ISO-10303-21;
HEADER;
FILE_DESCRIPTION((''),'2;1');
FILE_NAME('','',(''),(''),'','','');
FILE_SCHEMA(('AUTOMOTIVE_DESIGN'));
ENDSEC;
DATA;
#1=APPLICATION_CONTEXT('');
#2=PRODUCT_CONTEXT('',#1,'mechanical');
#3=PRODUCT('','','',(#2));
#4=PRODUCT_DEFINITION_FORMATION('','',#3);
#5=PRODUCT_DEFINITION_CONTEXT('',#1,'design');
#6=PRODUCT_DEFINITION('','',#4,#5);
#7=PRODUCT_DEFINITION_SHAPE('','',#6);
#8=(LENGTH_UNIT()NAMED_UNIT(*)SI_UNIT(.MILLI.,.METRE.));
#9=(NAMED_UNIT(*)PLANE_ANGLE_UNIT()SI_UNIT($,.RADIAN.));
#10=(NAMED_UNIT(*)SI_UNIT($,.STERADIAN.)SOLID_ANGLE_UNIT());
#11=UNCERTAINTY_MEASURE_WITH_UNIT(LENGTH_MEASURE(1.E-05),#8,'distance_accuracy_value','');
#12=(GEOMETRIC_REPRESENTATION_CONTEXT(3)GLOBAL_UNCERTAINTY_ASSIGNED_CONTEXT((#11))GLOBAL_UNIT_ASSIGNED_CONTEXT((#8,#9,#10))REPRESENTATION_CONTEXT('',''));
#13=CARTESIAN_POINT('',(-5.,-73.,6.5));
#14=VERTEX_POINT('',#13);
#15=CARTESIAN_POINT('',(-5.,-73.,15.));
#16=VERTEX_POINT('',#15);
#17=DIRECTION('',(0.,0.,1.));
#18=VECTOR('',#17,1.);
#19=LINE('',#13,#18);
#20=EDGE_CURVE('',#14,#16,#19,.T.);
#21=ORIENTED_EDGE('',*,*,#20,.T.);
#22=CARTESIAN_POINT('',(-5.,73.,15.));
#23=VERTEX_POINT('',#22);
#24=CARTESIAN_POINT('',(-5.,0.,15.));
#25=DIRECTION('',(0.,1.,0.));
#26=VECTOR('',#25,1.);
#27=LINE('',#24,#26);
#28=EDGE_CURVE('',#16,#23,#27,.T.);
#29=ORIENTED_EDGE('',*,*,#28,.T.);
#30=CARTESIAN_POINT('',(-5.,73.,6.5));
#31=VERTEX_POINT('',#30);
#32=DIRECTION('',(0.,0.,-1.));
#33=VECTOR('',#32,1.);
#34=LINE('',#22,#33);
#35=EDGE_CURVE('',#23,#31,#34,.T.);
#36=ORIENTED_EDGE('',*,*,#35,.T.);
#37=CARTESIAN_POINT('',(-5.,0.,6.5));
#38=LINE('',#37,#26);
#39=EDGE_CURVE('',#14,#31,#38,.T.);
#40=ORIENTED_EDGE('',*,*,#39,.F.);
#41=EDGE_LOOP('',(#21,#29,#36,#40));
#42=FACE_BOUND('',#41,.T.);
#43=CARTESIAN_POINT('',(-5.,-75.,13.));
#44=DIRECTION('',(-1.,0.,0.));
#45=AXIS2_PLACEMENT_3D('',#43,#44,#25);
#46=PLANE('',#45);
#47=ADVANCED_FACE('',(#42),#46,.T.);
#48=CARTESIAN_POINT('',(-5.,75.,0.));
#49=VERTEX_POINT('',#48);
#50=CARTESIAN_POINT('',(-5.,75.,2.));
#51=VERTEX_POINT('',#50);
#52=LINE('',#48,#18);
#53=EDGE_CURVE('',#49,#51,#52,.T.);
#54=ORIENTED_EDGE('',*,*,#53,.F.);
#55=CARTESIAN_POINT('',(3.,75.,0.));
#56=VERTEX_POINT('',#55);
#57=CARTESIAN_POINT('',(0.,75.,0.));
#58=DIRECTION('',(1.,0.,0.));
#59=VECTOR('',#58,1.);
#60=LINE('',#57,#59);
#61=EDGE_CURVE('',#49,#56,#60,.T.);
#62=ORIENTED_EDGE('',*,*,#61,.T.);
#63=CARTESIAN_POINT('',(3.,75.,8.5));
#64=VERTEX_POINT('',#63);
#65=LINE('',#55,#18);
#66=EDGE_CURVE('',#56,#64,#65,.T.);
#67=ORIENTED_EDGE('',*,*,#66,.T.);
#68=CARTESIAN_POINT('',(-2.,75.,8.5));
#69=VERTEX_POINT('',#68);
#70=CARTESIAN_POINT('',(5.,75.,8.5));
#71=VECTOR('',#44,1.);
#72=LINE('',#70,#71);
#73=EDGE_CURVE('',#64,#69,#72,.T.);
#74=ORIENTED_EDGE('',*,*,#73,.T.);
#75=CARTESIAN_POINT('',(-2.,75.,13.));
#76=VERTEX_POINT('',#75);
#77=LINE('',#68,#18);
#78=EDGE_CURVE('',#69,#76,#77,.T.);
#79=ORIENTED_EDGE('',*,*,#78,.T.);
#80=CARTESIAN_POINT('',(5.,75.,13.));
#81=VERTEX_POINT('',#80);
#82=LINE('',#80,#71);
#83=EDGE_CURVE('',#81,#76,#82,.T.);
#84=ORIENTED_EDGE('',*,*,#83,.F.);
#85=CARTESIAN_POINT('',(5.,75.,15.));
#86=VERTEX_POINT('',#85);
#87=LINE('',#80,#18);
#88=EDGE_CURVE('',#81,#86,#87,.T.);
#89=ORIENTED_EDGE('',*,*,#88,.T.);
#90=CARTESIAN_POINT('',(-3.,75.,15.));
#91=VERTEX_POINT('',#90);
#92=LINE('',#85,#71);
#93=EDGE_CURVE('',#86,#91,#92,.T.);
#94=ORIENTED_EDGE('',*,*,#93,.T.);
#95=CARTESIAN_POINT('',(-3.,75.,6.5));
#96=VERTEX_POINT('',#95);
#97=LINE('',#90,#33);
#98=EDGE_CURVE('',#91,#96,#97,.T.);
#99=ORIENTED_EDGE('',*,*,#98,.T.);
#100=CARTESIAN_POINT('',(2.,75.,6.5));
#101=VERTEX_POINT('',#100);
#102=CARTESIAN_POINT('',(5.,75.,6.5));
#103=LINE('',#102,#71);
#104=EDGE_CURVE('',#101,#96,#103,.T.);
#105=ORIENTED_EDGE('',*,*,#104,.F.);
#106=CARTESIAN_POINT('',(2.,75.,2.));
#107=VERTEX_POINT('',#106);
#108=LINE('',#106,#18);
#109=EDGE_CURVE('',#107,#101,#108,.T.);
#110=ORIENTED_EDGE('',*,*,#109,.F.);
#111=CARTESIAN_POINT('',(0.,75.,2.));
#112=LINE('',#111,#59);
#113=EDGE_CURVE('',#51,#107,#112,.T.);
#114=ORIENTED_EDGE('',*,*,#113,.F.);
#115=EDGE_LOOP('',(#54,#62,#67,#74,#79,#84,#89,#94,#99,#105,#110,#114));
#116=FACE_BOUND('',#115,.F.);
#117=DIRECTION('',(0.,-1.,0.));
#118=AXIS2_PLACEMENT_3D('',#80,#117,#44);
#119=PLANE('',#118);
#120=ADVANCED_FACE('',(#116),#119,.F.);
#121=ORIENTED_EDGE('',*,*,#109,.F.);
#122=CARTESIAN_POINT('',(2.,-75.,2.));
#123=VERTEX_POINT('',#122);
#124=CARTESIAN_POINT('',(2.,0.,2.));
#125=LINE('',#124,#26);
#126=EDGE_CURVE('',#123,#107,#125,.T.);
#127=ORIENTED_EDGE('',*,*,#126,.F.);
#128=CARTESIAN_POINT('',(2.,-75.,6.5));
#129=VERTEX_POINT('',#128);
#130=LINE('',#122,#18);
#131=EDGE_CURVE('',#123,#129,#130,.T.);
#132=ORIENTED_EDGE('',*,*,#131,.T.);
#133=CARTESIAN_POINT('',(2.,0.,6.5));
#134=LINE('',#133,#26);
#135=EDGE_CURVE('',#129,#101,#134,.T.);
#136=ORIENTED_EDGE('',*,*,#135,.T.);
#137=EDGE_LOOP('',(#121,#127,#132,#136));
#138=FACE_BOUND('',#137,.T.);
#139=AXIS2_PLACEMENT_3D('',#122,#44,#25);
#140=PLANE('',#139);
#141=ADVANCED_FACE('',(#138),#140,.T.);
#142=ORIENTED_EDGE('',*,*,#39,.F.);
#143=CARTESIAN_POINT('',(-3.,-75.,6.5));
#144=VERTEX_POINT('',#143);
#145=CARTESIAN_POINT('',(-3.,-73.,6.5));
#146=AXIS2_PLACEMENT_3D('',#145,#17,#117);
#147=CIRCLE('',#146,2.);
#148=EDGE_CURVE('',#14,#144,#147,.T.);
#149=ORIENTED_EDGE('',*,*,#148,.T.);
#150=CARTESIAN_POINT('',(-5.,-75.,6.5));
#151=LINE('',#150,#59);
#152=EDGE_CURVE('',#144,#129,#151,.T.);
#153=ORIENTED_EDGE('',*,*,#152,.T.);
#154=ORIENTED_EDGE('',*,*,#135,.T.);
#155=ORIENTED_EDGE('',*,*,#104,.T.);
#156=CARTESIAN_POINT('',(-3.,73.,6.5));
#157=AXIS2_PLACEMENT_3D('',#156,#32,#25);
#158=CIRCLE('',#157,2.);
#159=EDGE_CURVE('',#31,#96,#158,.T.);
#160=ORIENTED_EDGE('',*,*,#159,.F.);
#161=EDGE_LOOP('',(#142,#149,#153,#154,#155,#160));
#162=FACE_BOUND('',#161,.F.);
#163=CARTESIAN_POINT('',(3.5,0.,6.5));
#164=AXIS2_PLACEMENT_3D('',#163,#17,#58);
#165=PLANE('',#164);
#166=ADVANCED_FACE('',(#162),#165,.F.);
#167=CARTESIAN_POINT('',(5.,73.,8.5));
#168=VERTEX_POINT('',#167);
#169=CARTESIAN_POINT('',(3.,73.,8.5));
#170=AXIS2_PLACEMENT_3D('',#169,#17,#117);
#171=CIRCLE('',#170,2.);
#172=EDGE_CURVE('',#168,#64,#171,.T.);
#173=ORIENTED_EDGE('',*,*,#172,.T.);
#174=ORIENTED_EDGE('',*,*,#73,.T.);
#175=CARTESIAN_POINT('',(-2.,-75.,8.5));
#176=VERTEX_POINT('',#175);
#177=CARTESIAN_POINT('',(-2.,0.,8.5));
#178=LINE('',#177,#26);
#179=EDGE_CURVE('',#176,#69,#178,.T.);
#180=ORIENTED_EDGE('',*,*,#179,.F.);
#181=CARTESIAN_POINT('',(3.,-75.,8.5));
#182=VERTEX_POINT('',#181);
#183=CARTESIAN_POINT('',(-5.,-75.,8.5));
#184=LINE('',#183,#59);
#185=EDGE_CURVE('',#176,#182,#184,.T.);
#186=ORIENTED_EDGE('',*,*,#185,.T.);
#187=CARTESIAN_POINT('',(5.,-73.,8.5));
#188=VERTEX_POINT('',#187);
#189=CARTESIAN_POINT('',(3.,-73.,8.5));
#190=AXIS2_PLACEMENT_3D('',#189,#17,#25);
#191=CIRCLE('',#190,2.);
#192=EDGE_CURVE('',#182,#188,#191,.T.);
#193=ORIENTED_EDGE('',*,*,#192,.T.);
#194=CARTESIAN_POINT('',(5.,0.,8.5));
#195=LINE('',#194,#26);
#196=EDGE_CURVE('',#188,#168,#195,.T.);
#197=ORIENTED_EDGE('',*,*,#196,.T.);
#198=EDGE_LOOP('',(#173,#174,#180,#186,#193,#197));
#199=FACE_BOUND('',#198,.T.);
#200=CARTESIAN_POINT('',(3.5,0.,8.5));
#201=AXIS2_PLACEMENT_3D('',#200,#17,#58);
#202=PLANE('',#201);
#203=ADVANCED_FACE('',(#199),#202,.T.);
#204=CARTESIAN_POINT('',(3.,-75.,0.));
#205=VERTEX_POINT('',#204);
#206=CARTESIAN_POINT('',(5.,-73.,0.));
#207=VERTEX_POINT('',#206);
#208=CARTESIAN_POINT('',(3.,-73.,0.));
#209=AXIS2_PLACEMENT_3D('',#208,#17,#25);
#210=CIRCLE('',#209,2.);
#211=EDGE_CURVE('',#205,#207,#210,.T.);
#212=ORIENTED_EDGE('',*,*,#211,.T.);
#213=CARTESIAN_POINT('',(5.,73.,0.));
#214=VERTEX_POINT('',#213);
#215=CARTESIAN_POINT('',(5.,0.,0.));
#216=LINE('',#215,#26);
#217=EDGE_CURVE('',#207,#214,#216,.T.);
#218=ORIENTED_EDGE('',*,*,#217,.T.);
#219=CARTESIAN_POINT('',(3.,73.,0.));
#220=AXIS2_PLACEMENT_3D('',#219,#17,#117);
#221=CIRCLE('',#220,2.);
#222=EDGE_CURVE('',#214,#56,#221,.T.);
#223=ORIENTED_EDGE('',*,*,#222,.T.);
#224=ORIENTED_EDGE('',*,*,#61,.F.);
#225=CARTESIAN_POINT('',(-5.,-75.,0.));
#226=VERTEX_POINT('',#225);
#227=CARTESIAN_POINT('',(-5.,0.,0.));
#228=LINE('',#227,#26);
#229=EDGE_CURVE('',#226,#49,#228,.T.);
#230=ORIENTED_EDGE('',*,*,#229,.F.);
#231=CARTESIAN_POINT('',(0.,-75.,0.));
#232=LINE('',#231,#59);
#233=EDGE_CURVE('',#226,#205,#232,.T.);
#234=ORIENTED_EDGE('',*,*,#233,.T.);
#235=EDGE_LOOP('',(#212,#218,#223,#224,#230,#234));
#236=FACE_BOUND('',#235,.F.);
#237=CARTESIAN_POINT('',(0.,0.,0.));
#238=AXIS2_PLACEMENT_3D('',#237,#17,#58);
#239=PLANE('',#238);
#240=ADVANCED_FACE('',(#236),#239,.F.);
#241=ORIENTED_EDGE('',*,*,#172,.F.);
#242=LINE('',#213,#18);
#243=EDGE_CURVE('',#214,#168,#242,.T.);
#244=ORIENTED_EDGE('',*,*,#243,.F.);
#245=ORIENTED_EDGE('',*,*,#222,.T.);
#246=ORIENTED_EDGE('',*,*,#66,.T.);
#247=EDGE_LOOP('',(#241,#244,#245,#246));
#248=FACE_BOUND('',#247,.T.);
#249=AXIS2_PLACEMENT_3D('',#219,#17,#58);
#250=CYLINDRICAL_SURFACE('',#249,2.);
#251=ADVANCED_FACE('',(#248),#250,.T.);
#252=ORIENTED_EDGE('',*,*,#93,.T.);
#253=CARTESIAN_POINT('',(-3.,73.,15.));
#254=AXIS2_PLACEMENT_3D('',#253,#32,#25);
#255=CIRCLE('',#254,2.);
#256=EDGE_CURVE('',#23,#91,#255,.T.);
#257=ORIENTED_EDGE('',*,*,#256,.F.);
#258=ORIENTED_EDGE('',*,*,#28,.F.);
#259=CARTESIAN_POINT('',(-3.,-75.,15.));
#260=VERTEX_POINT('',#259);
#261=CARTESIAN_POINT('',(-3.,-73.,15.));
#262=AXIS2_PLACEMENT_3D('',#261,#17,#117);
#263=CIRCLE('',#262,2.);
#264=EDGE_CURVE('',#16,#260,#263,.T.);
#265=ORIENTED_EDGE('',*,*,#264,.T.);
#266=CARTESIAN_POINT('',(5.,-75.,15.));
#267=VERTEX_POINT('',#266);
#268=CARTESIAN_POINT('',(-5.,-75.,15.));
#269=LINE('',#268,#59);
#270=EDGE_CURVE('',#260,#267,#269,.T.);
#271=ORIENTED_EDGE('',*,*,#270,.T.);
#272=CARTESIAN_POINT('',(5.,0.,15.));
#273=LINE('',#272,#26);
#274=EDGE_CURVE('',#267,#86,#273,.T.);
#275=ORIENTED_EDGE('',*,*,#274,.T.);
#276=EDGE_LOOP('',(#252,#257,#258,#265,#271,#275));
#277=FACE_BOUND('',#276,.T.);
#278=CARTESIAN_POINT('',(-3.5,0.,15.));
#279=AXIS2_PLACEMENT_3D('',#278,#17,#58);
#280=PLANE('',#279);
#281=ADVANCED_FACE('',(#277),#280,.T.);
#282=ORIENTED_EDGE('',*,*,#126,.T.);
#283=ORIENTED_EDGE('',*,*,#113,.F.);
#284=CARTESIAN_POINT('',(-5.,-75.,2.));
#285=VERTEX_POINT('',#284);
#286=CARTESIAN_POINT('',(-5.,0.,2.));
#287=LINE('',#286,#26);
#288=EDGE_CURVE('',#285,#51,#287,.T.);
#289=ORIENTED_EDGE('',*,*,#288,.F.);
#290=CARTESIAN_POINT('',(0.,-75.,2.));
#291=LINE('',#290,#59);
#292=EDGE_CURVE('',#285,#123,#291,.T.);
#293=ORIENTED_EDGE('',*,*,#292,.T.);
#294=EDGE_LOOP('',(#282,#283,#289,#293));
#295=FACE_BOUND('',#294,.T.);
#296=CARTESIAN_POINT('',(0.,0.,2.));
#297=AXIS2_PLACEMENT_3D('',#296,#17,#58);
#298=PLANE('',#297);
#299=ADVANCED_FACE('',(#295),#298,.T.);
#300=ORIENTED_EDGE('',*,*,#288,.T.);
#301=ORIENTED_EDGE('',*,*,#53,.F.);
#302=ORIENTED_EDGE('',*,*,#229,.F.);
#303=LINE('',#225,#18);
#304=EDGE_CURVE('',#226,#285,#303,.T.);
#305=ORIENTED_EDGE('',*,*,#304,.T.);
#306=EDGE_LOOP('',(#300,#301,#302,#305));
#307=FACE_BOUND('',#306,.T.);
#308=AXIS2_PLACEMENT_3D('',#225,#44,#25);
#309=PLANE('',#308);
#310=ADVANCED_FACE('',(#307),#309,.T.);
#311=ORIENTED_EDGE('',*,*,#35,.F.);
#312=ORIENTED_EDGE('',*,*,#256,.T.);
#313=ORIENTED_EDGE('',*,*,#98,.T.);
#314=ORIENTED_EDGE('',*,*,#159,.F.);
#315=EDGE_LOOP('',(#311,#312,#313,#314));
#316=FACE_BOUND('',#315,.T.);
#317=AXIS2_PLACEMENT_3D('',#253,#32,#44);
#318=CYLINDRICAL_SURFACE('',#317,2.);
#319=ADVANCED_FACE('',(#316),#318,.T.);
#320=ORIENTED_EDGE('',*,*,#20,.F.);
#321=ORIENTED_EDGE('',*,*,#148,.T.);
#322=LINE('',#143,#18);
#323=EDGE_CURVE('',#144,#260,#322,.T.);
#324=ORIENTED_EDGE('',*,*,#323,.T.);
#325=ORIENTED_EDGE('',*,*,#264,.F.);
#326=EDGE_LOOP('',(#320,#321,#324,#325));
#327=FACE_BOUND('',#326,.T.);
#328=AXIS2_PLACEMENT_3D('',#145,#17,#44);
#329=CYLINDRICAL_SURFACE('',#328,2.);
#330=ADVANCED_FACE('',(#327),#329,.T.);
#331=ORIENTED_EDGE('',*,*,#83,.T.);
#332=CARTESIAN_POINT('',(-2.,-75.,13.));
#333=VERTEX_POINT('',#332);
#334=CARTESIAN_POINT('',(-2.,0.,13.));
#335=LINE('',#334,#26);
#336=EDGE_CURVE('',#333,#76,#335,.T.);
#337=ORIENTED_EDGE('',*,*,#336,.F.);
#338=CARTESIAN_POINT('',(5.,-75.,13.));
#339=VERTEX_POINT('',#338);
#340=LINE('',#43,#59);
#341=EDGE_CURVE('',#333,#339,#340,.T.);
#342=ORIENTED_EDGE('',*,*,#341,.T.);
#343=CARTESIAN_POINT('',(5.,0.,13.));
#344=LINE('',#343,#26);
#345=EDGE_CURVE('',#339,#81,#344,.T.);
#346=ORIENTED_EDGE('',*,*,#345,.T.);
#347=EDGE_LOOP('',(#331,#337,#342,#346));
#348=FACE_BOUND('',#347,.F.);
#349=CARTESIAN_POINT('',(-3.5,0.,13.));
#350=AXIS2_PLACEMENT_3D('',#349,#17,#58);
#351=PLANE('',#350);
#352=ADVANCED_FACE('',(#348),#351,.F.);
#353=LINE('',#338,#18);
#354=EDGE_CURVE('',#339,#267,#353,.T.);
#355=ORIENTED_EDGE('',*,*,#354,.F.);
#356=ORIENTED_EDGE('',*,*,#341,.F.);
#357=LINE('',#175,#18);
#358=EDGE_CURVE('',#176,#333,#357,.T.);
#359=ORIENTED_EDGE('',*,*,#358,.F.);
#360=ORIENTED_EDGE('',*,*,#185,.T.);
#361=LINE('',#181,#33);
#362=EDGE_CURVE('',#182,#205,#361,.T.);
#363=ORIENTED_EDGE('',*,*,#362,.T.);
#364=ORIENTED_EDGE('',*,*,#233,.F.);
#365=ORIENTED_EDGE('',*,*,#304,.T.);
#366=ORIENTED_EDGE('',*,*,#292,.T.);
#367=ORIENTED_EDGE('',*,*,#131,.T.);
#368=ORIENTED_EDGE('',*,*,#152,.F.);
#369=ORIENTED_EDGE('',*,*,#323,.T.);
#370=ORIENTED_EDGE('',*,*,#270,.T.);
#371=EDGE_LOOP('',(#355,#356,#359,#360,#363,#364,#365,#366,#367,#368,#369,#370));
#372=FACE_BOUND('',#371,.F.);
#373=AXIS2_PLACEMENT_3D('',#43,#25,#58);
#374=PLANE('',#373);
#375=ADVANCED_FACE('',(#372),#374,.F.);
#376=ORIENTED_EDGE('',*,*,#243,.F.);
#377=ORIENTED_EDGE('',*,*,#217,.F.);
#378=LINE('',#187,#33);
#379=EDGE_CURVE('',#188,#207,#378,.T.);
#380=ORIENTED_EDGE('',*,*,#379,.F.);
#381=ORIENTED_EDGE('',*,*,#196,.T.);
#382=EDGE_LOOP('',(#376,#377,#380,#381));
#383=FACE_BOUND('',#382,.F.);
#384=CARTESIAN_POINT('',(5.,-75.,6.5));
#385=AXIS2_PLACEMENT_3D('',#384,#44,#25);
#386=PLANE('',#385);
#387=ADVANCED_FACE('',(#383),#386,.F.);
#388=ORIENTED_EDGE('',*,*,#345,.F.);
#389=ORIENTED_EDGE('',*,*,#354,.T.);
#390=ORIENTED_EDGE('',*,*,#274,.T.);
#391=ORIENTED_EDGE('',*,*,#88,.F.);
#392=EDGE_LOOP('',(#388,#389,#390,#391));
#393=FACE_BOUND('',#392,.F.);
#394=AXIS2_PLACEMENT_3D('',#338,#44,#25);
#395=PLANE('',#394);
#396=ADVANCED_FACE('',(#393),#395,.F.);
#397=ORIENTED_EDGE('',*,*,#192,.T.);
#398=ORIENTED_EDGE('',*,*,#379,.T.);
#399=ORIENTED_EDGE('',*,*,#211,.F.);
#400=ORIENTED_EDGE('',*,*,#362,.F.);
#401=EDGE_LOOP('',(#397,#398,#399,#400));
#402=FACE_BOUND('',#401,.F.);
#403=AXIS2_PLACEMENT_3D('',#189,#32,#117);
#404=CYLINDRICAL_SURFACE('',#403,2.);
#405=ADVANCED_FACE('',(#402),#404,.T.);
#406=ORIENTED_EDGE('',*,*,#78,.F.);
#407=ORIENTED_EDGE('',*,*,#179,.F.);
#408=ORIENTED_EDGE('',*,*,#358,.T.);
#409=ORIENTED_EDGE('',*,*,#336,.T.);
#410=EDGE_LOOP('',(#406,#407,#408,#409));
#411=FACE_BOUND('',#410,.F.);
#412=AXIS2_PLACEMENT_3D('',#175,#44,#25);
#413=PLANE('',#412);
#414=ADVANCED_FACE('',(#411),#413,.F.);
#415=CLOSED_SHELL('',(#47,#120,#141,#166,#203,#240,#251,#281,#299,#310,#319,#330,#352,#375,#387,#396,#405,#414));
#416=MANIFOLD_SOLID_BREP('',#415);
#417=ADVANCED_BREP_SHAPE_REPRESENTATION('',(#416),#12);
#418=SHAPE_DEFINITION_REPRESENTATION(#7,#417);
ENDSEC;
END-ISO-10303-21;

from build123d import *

# Parameters (mm, degrees)
F0_W     = 10
F0_H     = 150
F1_DEPTH = 2
F2_W     = 3
F2_H     = 150
F3_DEPTH = 4.5
F4_W     = 3
F4_H     = 150
F4_W_2   = 7
F5_DEPTH = 2
F6_W     = 3
F6_H     = 150
F7_DEPTH = 4.5
F8_W     = 3
F8_H     = 150
F8_W_2   = 7
F9_DEPTH = 2
F10_R    = 2


# Not quite as in the source:
# - a feature names something its author has since deleted; it is built from what else it names


with BuildPart() as f1:
    # F0 (on Top) → F1 (new body)
    with BuildSketch(Plane.XY):
        Rectangle(F0_W, F0_H)
    extrude(amount=F1_DEPTH)

    # F2 (on face) → F3 (join)
    with BuildSketch(Plane.XY.offset(2)):
        with Locations((3.5, 0)):
            Rectangle(F2_W, F2_H)
    extrude(amount=F3_DEPTH)

    # F4 (on face) → F5 (join)
    with BuildSketch(Plane.XY.offset(6.5)):
        with Locations((3.5, 0)):
            Rectangle(F4_W, F4_H)
        with Locations((-1.5, 0)):
            Rectangle(F4_W_2, F4_H)
    extrude(amount=F5_DEPTH)

    # F6 (on face) → F7 (join)
    with BuildSketch(Plane.XY.offset(8.5)):
        with Locations((-3.5, 0)):
            Rectangle(F6_W, F6_H)
    extrude(amount=F7_DEPTH)

    # F8 (on face) → F9 (join)
    with BuildSketch(Plane.XY.offset(13)):
        with Locations((-3.5, 0)):
            Rectangle(F8_W, F8_H)
        with Locations((1.5, 0)):
            Rectangle(F8_W_2, F8_H)
    extrude(amount=F9_DEPTH)

    # F10
    f10_edges = [f1.edges().sort_by_distance(p)[0] for p in [
        (-5, 75, 10.75),
        (5, 75, 4.25),
        (-5, -75, 10.75),
        (5, -75, 4.25),
    ]]
    fillet(f10_edges, radius=F10_R)


solid = f1.part
